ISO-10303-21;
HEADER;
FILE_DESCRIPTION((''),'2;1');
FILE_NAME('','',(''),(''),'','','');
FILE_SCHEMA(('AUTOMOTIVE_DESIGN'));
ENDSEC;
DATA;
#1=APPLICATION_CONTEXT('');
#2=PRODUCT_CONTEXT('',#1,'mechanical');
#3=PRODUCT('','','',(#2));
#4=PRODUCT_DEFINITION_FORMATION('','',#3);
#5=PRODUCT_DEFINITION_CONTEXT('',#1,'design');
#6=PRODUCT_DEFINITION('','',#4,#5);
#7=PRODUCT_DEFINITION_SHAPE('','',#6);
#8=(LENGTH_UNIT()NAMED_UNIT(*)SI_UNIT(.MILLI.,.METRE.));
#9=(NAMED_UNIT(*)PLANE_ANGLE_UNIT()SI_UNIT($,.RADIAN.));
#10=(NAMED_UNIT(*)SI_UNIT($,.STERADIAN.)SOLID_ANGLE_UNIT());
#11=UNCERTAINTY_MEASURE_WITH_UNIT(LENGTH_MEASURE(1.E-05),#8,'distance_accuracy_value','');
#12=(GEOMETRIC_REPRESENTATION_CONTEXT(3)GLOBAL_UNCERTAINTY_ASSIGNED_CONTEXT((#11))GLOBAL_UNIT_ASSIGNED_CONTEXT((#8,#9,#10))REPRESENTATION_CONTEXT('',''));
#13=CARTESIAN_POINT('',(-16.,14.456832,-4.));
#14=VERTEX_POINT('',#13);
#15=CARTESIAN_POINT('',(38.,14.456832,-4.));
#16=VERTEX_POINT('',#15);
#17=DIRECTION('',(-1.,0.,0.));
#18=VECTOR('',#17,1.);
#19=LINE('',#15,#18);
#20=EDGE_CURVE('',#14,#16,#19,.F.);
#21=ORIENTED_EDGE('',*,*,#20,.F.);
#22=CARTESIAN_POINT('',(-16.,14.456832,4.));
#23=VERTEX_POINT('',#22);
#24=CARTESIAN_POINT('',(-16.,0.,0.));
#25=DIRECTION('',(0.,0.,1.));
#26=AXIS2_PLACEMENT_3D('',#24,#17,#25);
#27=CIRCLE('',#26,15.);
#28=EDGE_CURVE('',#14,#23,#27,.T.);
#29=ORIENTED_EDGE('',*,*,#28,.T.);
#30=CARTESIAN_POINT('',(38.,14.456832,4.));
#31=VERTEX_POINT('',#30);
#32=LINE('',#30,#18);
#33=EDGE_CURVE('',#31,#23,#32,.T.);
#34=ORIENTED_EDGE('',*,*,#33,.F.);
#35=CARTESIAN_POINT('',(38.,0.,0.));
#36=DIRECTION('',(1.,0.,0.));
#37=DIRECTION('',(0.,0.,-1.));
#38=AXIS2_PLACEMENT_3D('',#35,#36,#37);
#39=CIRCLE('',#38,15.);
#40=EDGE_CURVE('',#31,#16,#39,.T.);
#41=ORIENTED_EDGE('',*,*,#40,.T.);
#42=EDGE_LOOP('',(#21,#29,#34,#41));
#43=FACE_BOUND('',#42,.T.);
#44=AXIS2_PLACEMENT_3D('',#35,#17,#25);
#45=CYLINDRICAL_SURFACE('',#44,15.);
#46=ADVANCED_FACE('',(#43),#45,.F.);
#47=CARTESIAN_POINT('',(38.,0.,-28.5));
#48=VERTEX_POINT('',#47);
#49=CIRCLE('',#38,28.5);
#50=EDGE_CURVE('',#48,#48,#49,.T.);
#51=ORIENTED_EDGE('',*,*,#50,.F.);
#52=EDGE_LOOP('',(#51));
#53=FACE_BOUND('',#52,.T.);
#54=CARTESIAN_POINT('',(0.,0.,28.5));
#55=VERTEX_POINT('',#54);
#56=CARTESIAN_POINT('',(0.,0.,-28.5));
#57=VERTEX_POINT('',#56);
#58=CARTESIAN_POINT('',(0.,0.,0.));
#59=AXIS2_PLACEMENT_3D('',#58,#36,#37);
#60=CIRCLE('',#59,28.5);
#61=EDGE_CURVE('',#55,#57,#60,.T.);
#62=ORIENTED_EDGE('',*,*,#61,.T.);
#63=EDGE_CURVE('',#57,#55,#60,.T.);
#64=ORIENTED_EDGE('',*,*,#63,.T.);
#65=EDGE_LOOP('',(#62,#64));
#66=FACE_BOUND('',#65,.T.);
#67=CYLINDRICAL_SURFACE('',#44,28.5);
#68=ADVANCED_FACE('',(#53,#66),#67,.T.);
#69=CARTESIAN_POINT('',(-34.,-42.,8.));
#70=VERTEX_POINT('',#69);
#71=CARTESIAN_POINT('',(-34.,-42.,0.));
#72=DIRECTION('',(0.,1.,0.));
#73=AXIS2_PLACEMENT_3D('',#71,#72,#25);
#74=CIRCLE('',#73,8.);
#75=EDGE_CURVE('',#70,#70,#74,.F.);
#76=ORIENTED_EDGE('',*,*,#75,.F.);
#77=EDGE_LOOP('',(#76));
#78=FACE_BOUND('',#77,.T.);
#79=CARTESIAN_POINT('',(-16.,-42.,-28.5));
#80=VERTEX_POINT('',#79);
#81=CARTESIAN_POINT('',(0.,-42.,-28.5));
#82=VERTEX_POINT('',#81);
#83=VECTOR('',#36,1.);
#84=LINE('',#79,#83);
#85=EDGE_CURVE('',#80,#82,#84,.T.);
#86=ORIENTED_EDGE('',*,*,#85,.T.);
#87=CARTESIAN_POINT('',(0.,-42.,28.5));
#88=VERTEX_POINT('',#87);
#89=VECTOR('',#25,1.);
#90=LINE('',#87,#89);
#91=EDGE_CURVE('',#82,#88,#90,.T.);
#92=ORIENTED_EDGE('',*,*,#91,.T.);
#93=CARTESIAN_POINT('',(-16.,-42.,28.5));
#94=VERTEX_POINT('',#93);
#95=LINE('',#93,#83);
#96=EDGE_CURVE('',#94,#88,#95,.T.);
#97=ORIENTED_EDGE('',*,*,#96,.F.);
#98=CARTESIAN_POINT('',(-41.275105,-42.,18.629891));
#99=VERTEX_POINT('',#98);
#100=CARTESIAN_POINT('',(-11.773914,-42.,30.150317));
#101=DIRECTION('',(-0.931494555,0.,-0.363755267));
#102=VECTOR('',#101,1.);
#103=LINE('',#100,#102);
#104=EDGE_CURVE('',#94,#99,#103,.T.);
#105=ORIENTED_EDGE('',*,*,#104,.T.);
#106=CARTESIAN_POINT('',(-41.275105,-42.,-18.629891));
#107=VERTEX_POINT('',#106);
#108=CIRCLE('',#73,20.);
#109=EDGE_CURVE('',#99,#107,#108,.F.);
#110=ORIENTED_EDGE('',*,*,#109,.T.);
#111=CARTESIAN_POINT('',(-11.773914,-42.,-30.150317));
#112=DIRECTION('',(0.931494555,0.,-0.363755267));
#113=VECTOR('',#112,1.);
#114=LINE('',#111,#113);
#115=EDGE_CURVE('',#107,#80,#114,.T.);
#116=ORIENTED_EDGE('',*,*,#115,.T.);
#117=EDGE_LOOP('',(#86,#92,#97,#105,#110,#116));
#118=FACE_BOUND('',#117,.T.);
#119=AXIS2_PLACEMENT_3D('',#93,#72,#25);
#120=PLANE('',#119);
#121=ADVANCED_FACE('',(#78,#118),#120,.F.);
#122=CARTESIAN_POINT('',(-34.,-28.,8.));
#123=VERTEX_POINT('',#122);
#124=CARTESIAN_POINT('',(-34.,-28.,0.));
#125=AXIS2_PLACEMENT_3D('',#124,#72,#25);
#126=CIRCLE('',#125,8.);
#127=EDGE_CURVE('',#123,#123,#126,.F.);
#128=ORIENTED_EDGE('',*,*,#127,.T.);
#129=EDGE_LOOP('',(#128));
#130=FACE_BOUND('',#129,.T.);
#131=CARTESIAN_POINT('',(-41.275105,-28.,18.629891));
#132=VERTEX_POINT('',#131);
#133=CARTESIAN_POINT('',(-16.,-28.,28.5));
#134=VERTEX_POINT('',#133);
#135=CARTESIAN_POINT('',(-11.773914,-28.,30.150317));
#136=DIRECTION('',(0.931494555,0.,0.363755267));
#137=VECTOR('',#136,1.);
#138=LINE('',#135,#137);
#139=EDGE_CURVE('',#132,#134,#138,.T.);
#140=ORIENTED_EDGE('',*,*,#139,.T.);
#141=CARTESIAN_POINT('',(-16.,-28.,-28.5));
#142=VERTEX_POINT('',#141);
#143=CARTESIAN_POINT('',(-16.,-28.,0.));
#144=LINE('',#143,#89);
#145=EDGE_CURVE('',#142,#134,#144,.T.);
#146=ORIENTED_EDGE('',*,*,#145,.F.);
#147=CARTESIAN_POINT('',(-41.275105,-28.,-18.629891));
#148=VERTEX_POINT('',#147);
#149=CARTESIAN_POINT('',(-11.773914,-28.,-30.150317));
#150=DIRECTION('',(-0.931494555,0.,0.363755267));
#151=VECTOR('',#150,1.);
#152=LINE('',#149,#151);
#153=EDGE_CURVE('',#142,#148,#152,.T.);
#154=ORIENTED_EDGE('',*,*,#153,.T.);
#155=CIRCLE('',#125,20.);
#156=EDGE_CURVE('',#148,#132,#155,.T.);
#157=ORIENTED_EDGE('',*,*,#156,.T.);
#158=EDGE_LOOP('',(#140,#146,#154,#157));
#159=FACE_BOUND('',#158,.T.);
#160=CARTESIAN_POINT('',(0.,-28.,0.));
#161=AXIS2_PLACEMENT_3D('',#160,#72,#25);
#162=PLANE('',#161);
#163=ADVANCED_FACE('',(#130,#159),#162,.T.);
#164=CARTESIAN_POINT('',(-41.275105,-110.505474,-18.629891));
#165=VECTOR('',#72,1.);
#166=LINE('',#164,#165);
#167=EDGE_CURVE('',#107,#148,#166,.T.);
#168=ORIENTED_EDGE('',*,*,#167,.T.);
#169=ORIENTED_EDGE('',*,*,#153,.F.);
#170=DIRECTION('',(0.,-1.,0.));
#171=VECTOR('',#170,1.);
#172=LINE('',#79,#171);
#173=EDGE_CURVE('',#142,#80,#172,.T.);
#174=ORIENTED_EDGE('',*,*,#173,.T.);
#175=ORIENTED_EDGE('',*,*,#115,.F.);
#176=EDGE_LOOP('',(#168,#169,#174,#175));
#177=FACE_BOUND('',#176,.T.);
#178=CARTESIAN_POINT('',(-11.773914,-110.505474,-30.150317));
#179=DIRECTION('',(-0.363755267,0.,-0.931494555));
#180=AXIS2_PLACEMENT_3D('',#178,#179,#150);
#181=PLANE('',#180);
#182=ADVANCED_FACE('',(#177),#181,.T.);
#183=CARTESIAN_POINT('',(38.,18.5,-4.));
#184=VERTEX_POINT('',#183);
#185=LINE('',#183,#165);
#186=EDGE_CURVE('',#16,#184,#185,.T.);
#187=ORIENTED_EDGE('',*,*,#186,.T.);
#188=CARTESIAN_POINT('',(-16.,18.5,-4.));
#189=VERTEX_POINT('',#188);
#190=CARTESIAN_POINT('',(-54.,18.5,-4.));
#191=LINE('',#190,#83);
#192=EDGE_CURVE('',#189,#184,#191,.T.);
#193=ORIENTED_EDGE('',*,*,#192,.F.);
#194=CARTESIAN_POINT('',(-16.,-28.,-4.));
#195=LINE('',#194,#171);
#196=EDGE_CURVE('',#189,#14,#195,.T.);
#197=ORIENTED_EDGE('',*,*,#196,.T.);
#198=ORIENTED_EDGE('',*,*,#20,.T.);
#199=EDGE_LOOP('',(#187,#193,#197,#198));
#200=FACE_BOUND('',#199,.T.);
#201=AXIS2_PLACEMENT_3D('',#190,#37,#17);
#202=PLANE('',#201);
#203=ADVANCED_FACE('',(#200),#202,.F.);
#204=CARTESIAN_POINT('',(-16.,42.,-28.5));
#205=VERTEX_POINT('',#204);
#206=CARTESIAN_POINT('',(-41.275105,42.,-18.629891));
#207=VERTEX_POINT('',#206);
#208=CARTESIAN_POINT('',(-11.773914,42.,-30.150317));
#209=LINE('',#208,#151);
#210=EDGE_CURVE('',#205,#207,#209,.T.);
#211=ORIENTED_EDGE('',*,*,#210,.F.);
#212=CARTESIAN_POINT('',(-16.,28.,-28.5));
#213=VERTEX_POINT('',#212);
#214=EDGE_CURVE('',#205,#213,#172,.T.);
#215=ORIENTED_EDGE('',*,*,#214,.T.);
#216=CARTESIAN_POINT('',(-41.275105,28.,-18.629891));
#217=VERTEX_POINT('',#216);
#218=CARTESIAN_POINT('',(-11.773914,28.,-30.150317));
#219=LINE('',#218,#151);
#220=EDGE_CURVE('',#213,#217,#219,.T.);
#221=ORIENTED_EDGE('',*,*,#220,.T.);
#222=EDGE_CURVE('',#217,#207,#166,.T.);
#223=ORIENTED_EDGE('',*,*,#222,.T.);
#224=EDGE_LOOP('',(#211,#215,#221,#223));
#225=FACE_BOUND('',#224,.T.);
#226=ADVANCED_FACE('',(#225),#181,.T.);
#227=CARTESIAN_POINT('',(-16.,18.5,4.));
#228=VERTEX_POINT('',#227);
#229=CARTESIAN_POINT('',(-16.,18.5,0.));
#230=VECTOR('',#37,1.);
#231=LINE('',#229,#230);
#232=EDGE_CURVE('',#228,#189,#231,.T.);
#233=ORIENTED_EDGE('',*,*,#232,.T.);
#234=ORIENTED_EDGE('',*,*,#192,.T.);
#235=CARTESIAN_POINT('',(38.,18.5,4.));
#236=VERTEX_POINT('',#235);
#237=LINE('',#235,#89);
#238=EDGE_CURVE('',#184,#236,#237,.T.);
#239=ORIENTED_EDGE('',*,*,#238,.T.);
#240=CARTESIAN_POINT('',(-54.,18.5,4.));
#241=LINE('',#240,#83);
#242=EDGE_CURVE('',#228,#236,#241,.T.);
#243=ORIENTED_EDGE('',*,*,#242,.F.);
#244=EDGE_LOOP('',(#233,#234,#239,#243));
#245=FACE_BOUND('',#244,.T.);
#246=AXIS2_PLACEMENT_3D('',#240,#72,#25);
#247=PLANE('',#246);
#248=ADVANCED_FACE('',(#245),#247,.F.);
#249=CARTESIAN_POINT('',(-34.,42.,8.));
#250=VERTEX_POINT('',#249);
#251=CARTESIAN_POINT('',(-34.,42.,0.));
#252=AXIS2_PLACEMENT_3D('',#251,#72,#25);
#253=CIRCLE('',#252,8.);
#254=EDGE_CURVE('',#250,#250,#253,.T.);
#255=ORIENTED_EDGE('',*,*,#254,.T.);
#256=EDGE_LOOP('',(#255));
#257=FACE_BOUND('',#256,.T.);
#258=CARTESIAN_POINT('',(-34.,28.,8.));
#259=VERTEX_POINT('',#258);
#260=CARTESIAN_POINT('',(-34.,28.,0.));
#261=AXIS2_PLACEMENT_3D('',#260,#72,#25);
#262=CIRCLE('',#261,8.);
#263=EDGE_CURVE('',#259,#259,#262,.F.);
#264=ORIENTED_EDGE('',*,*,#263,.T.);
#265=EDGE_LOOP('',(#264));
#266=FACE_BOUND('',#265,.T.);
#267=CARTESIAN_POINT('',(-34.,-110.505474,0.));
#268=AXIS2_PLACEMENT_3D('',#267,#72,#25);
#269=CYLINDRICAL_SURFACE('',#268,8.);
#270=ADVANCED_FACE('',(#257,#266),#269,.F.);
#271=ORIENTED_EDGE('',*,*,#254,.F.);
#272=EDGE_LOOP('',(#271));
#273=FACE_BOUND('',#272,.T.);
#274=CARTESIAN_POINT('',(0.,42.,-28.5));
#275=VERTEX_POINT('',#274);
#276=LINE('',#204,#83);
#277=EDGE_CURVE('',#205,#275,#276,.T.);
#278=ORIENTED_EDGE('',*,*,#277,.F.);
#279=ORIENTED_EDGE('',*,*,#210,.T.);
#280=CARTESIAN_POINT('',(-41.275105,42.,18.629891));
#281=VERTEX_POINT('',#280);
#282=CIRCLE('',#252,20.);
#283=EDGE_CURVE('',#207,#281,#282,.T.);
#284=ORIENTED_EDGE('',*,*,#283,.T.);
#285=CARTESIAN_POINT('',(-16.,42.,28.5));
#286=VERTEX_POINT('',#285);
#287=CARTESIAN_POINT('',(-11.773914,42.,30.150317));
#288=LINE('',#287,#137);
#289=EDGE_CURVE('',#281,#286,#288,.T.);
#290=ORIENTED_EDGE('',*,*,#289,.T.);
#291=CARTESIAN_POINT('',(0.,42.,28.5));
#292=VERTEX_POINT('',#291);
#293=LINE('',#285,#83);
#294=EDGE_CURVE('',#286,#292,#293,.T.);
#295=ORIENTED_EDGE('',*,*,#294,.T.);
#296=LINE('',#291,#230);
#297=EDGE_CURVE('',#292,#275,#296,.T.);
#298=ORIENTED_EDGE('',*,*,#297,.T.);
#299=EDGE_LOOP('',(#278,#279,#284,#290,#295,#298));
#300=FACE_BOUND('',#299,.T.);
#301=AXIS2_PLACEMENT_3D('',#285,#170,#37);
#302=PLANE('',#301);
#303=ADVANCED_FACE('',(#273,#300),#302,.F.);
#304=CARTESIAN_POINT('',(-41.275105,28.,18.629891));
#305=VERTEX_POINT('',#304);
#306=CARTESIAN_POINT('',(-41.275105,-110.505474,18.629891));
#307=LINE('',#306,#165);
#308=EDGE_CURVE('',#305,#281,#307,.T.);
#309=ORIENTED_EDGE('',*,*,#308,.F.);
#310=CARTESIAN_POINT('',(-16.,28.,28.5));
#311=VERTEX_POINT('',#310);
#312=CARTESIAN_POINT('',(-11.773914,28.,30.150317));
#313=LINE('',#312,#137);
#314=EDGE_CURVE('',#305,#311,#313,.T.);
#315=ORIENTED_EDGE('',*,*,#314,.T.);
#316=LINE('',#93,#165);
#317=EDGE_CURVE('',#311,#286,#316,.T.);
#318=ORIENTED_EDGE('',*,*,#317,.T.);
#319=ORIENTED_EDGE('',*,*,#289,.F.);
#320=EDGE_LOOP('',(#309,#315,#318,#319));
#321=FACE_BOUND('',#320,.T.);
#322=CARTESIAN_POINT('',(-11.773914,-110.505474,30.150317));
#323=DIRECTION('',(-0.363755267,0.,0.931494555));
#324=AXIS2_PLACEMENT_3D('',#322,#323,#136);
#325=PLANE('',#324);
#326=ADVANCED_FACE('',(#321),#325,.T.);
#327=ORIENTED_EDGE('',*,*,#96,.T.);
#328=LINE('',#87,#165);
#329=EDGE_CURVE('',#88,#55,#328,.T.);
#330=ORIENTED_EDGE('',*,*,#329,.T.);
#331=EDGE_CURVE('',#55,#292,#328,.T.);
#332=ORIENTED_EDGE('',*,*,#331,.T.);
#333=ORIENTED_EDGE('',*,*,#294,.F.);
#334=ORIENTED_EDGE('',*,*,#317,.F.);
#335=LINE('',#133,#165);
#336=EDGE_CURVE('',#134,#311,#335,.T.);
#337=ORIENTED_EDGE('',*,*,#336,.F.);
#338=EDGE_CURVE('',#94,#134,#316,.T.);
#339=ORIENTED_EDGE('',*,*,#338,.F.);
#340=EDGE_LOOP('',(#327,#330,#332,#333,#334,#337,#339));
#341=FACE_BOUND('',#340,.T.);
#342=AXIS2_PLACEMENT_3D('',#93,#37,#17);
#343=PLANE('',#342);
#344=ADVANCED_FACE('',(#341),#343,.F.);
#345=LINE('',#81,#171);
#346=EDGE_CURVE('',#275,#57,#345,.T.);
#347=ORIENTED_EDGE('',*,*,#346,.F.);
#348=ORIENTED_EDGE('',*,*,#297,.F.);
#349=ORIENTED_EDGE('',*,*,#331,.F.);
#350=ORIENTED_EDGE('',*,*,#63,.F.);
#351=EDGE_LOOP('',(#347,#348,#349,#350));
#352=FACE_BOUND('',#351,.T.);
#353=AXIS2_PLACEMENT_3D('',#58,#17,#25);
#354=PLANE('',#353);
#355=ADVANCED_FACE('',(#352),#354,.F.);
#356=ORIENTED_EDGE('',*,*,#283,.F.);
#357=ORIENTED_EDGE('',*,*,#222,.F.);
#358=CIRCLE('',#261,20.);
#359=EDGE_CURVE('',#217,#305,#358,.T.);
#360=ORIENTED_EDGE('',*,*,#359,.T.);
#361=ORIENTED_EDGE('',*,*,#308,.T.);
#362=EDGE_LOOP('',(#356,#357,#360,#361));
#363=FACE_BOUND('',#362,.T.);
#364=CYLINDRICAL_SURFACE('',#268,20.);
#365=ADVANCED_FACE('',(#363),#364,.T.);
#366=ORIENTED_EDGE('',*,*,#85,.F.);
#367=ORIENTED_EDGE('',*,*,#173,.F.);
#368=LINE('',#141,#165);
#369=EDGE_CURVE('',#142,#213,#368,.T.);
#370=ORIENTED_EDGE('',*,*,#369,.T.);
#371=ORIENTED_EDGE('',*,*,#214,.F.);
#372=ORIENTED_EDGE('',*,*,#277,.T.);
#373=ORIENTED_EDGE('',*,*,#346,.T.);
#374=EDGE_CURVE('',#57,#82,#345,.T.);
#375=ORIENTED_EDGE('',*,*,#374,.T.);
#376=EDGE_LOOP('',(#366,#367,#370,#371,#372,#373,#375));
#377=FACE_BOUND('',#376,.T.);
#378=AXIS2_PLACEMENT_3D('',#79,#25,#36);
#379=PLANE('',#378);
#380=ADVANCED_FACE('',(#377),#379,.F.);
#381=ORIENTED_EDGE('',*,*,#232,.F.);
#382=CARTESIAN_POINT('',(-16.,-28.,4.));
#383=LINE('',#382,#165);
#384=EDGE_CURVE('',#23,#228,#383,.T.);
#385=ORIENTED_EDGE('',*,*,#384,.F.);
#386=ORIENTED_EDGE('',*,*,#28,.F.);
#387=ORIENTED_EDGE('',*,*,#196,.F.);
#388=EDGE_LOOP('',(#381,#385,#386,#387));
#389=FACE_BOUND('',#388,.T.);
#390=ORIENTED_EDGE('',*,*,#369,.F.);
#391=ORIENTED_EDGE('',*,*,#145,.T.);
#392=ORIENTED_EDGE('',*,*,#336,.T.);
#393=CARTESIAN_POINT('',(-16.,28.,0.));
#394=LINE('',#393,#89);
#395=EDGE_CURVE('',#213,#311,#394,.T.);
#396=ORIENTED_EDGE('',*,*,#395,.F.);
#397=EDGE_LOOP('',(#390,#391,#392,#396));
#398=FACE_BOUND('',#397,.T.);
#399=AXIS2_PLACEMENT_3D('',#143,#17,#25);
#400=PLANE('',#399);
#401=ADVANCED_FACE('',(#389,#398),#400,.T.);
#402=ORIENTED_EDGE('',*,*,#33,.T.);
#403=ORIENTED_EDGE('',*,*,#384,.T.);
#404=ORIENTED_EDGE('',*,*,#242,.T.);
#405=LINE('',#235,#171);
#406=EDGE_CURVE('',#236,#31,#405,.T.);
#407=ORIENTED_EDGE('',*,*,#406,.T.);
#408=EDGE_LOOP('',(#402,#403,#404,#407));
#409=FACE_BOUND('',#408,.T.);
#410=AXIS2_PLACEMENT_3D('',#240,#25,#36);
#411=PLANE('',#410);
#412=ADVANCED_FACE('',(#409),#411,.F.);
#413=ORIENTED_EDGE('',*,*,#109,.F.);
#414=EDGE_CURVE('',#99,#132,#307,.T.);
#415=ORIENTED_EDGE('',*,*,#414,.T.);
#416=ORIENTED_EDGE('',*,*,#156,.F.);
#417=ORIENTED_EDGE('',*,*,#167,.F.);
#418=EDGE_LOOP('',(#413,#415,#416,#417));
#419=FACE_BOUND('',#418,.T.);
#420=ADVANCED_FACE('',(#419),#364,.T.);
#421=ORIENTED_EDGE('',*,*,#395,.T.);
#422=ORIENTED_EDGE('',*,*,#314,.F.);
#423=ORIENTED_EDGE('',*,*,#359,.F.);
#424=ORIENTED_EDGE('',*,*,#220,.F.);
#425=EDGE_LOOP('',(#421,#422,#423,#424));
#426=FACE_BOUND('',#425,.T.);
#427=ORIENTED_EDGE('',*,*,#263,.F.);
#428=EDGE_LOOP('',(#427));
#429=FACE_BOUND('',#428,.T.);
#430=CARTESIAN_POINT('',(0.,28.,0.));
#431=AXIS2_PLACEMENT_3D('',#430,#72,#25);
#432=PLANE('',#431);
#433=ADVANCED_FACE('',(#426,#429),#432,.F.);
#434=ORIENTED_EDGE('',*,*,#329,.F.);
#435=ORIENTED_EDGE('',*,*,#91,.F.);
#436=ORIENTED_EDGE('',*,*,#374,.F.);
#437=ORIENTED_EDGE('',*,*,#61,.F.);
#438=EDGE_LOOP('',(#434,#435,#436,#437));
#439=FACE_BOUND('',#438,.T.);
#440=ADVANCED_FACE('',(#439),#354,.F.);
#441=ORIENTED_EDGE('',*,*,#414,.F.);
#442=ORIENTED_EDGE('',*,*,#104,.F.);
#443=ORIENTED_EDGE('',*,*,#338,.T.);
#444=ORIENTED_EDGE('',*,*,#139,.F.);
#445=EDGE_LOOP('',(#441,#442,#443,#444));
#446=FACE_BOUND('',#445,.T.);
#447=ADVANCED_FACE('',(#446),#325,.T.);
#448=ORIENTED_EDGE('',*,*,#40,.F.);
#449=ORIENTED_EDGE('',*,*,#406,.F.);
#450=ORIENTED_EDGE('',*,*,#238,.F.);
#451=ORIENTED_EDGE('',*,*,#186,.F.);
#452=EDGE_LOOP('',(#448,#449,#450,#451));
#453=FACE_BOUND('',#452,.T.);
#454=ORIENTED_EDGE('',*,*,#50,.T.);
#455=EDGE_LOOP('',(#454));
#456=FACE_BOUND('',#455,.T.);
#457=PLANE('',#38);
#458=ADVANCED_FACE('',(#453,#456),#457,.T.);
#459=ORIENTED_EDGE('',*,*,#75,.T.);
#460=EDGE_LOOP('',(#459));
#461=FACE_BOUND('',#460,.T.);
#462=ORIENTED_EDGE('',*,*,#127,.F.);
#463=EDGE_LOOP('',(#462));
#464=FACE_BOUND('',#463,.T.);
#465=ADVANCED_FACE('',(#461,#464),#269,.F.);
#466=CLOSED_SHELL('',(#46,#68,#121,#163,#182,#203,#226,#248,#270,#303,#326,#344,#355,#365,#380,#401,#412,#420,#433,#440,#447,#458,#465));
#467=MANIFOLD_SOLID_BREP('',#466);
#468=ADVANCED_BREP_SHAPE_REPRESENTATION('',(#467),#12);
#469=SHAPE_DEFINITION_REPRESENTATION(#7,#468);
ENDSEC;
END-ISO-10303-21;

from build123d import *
from build123d.topology import SkipClean

# Parameters (mm, degrees)
SKETCH1_R           = 28.5
SKETCH1_R_2         = 15
BOSS_EXTRUDE1_DEPTH = 38
BOSS_EXTRUDE2_START = 16
SKETCH3_W           = 57
SKETCH3_H           = 84
SKETCH3_R           = 15
BOSS_EXTRUDE2_DEPTH = 16
BOSS_EXTRUDE3_DEPTH = 84
CUT_EXTRUDE1_DEPTH  = 28
SKETCH7_W           = 8
SKETCH7_H           = 7
CUT_EXTRUDE2_DEPTH  = 106.072593953


with BuildPart() as part:
    # Sketch1 → Boss-Extrude1 (new body)
    with BuildSketch(Plane(origin=(0, 0, 0), x_dir=(0, 0, -1), z_dir=(1, 0, 0))):
        Circle(SKETCH1_R)
        Circle(SKETCH1_R_2, mode=Mode.SUBTRACT)
    extrude(amount=BOSS_EXTRUDE1_DEPTH)

    # Sketch3 → Boss-Extrude2 (add)
    with SkipClean():  # the faces are left unmerged after this step: merging them gives an invalid solid
        with BuildSketch(Plane.ZY.offset(BOSS_EXTRUDE2_START)):
            Rectangle(SKETCH3_W, SKETCH3_H)
            Circle(SKETCH3_R, mode=Mode.SUBTRACT)
        extrude(amount=-BOSS_EXTRUDE2_DEPTH)

    # Sketch4 → Boss-Extrude3 (add)
    with SkipClean():  # the faces are left unmerged after this step: merging them gives an invalid solid
        with BuildSketch(Plane(origin=(0, 42, 0), x_dir=(1, 0, 0), z_dir=(0, 1, 0))):
            with BuildLine():
                Line((-16, 0), (-16, 28.5))
                Line((-16, 28.5), (-41.275105345, 18.629891095))
                ThreePointArc((-41.275105345, 18.629891095), (-50.515176458, 11.280467479), (-54, 0))
                Line((-54, 0), (-42, 0))
                ThreePointArc((-42, 0), (-34, 8), (-26, 0))
                Line((-26, 0), (-16, 0))
            make_face()
            with BuildLine():
                Line((-16, -28.5), (-16, 0))
                Line((-16, 0), (-26, 0))
                ThreePointArc((-26, 0), (-34, -8), (-42, 0))
                Line((-42, 0), (-54, 0))
                ThreePointArc((-54, 0), (-50.515176458, -11.280467479), (-41.275105345, -18.629891095))
                Line((-41.275105345, -18.629891095), (-16, -28.5))
            make_face()
        extrude(amount=-BOSS_EXTRUDE3_DEPTH)

    # Sketch5 → Cut-Extrude1 (cut, symmetric)
    with SkipClean():  # the faces are left unmerged after this step: merging them gives an invalid solid
        with BuildSketch(Plane(origin=(0, 0, 0), x_dir=(1, 0, 0), z_dir=(0, 1, 0))):
            with BuildLine():
                Line((-16, 28.5), (-41.275105345, 18.629891095))
                ThreePointArc((-41.275105345, 18.629891095), (-54, 0), (-41.275105345, -18.629891095))
                Line((-41.275105345, -18.629891095), (-16, -28.5))
                Line((-16, -28.5), (-16, 28.5))
            make_face()
        extrude(amount=CUT_EXTRUDE1_DEPTH, both=True, mode=Mode.SUBTRACT)

    # Sketch7 → Cut-Extrude2 (cut, through all)
    with SkipClean():  # the faces are left unmerged after this step: merging them gives an invalid solid
        with BuildSketch(Plane(origin=(38, 0, 0), x_dir=(0, 0, -1), z_dir=(1, 0, 0))):
            with Locations((0, 15)):
                Rectangle(SKETCH7_W, SKETCH7_H)
        extrude(amount=-CUT_EXTRUDE2_DEPTH, mode=Mode.SUBTRACT)
    add(part.part.scale(1), mode=Mode.REPLACE)  # the faces are merged on a copy


solid = part.part
